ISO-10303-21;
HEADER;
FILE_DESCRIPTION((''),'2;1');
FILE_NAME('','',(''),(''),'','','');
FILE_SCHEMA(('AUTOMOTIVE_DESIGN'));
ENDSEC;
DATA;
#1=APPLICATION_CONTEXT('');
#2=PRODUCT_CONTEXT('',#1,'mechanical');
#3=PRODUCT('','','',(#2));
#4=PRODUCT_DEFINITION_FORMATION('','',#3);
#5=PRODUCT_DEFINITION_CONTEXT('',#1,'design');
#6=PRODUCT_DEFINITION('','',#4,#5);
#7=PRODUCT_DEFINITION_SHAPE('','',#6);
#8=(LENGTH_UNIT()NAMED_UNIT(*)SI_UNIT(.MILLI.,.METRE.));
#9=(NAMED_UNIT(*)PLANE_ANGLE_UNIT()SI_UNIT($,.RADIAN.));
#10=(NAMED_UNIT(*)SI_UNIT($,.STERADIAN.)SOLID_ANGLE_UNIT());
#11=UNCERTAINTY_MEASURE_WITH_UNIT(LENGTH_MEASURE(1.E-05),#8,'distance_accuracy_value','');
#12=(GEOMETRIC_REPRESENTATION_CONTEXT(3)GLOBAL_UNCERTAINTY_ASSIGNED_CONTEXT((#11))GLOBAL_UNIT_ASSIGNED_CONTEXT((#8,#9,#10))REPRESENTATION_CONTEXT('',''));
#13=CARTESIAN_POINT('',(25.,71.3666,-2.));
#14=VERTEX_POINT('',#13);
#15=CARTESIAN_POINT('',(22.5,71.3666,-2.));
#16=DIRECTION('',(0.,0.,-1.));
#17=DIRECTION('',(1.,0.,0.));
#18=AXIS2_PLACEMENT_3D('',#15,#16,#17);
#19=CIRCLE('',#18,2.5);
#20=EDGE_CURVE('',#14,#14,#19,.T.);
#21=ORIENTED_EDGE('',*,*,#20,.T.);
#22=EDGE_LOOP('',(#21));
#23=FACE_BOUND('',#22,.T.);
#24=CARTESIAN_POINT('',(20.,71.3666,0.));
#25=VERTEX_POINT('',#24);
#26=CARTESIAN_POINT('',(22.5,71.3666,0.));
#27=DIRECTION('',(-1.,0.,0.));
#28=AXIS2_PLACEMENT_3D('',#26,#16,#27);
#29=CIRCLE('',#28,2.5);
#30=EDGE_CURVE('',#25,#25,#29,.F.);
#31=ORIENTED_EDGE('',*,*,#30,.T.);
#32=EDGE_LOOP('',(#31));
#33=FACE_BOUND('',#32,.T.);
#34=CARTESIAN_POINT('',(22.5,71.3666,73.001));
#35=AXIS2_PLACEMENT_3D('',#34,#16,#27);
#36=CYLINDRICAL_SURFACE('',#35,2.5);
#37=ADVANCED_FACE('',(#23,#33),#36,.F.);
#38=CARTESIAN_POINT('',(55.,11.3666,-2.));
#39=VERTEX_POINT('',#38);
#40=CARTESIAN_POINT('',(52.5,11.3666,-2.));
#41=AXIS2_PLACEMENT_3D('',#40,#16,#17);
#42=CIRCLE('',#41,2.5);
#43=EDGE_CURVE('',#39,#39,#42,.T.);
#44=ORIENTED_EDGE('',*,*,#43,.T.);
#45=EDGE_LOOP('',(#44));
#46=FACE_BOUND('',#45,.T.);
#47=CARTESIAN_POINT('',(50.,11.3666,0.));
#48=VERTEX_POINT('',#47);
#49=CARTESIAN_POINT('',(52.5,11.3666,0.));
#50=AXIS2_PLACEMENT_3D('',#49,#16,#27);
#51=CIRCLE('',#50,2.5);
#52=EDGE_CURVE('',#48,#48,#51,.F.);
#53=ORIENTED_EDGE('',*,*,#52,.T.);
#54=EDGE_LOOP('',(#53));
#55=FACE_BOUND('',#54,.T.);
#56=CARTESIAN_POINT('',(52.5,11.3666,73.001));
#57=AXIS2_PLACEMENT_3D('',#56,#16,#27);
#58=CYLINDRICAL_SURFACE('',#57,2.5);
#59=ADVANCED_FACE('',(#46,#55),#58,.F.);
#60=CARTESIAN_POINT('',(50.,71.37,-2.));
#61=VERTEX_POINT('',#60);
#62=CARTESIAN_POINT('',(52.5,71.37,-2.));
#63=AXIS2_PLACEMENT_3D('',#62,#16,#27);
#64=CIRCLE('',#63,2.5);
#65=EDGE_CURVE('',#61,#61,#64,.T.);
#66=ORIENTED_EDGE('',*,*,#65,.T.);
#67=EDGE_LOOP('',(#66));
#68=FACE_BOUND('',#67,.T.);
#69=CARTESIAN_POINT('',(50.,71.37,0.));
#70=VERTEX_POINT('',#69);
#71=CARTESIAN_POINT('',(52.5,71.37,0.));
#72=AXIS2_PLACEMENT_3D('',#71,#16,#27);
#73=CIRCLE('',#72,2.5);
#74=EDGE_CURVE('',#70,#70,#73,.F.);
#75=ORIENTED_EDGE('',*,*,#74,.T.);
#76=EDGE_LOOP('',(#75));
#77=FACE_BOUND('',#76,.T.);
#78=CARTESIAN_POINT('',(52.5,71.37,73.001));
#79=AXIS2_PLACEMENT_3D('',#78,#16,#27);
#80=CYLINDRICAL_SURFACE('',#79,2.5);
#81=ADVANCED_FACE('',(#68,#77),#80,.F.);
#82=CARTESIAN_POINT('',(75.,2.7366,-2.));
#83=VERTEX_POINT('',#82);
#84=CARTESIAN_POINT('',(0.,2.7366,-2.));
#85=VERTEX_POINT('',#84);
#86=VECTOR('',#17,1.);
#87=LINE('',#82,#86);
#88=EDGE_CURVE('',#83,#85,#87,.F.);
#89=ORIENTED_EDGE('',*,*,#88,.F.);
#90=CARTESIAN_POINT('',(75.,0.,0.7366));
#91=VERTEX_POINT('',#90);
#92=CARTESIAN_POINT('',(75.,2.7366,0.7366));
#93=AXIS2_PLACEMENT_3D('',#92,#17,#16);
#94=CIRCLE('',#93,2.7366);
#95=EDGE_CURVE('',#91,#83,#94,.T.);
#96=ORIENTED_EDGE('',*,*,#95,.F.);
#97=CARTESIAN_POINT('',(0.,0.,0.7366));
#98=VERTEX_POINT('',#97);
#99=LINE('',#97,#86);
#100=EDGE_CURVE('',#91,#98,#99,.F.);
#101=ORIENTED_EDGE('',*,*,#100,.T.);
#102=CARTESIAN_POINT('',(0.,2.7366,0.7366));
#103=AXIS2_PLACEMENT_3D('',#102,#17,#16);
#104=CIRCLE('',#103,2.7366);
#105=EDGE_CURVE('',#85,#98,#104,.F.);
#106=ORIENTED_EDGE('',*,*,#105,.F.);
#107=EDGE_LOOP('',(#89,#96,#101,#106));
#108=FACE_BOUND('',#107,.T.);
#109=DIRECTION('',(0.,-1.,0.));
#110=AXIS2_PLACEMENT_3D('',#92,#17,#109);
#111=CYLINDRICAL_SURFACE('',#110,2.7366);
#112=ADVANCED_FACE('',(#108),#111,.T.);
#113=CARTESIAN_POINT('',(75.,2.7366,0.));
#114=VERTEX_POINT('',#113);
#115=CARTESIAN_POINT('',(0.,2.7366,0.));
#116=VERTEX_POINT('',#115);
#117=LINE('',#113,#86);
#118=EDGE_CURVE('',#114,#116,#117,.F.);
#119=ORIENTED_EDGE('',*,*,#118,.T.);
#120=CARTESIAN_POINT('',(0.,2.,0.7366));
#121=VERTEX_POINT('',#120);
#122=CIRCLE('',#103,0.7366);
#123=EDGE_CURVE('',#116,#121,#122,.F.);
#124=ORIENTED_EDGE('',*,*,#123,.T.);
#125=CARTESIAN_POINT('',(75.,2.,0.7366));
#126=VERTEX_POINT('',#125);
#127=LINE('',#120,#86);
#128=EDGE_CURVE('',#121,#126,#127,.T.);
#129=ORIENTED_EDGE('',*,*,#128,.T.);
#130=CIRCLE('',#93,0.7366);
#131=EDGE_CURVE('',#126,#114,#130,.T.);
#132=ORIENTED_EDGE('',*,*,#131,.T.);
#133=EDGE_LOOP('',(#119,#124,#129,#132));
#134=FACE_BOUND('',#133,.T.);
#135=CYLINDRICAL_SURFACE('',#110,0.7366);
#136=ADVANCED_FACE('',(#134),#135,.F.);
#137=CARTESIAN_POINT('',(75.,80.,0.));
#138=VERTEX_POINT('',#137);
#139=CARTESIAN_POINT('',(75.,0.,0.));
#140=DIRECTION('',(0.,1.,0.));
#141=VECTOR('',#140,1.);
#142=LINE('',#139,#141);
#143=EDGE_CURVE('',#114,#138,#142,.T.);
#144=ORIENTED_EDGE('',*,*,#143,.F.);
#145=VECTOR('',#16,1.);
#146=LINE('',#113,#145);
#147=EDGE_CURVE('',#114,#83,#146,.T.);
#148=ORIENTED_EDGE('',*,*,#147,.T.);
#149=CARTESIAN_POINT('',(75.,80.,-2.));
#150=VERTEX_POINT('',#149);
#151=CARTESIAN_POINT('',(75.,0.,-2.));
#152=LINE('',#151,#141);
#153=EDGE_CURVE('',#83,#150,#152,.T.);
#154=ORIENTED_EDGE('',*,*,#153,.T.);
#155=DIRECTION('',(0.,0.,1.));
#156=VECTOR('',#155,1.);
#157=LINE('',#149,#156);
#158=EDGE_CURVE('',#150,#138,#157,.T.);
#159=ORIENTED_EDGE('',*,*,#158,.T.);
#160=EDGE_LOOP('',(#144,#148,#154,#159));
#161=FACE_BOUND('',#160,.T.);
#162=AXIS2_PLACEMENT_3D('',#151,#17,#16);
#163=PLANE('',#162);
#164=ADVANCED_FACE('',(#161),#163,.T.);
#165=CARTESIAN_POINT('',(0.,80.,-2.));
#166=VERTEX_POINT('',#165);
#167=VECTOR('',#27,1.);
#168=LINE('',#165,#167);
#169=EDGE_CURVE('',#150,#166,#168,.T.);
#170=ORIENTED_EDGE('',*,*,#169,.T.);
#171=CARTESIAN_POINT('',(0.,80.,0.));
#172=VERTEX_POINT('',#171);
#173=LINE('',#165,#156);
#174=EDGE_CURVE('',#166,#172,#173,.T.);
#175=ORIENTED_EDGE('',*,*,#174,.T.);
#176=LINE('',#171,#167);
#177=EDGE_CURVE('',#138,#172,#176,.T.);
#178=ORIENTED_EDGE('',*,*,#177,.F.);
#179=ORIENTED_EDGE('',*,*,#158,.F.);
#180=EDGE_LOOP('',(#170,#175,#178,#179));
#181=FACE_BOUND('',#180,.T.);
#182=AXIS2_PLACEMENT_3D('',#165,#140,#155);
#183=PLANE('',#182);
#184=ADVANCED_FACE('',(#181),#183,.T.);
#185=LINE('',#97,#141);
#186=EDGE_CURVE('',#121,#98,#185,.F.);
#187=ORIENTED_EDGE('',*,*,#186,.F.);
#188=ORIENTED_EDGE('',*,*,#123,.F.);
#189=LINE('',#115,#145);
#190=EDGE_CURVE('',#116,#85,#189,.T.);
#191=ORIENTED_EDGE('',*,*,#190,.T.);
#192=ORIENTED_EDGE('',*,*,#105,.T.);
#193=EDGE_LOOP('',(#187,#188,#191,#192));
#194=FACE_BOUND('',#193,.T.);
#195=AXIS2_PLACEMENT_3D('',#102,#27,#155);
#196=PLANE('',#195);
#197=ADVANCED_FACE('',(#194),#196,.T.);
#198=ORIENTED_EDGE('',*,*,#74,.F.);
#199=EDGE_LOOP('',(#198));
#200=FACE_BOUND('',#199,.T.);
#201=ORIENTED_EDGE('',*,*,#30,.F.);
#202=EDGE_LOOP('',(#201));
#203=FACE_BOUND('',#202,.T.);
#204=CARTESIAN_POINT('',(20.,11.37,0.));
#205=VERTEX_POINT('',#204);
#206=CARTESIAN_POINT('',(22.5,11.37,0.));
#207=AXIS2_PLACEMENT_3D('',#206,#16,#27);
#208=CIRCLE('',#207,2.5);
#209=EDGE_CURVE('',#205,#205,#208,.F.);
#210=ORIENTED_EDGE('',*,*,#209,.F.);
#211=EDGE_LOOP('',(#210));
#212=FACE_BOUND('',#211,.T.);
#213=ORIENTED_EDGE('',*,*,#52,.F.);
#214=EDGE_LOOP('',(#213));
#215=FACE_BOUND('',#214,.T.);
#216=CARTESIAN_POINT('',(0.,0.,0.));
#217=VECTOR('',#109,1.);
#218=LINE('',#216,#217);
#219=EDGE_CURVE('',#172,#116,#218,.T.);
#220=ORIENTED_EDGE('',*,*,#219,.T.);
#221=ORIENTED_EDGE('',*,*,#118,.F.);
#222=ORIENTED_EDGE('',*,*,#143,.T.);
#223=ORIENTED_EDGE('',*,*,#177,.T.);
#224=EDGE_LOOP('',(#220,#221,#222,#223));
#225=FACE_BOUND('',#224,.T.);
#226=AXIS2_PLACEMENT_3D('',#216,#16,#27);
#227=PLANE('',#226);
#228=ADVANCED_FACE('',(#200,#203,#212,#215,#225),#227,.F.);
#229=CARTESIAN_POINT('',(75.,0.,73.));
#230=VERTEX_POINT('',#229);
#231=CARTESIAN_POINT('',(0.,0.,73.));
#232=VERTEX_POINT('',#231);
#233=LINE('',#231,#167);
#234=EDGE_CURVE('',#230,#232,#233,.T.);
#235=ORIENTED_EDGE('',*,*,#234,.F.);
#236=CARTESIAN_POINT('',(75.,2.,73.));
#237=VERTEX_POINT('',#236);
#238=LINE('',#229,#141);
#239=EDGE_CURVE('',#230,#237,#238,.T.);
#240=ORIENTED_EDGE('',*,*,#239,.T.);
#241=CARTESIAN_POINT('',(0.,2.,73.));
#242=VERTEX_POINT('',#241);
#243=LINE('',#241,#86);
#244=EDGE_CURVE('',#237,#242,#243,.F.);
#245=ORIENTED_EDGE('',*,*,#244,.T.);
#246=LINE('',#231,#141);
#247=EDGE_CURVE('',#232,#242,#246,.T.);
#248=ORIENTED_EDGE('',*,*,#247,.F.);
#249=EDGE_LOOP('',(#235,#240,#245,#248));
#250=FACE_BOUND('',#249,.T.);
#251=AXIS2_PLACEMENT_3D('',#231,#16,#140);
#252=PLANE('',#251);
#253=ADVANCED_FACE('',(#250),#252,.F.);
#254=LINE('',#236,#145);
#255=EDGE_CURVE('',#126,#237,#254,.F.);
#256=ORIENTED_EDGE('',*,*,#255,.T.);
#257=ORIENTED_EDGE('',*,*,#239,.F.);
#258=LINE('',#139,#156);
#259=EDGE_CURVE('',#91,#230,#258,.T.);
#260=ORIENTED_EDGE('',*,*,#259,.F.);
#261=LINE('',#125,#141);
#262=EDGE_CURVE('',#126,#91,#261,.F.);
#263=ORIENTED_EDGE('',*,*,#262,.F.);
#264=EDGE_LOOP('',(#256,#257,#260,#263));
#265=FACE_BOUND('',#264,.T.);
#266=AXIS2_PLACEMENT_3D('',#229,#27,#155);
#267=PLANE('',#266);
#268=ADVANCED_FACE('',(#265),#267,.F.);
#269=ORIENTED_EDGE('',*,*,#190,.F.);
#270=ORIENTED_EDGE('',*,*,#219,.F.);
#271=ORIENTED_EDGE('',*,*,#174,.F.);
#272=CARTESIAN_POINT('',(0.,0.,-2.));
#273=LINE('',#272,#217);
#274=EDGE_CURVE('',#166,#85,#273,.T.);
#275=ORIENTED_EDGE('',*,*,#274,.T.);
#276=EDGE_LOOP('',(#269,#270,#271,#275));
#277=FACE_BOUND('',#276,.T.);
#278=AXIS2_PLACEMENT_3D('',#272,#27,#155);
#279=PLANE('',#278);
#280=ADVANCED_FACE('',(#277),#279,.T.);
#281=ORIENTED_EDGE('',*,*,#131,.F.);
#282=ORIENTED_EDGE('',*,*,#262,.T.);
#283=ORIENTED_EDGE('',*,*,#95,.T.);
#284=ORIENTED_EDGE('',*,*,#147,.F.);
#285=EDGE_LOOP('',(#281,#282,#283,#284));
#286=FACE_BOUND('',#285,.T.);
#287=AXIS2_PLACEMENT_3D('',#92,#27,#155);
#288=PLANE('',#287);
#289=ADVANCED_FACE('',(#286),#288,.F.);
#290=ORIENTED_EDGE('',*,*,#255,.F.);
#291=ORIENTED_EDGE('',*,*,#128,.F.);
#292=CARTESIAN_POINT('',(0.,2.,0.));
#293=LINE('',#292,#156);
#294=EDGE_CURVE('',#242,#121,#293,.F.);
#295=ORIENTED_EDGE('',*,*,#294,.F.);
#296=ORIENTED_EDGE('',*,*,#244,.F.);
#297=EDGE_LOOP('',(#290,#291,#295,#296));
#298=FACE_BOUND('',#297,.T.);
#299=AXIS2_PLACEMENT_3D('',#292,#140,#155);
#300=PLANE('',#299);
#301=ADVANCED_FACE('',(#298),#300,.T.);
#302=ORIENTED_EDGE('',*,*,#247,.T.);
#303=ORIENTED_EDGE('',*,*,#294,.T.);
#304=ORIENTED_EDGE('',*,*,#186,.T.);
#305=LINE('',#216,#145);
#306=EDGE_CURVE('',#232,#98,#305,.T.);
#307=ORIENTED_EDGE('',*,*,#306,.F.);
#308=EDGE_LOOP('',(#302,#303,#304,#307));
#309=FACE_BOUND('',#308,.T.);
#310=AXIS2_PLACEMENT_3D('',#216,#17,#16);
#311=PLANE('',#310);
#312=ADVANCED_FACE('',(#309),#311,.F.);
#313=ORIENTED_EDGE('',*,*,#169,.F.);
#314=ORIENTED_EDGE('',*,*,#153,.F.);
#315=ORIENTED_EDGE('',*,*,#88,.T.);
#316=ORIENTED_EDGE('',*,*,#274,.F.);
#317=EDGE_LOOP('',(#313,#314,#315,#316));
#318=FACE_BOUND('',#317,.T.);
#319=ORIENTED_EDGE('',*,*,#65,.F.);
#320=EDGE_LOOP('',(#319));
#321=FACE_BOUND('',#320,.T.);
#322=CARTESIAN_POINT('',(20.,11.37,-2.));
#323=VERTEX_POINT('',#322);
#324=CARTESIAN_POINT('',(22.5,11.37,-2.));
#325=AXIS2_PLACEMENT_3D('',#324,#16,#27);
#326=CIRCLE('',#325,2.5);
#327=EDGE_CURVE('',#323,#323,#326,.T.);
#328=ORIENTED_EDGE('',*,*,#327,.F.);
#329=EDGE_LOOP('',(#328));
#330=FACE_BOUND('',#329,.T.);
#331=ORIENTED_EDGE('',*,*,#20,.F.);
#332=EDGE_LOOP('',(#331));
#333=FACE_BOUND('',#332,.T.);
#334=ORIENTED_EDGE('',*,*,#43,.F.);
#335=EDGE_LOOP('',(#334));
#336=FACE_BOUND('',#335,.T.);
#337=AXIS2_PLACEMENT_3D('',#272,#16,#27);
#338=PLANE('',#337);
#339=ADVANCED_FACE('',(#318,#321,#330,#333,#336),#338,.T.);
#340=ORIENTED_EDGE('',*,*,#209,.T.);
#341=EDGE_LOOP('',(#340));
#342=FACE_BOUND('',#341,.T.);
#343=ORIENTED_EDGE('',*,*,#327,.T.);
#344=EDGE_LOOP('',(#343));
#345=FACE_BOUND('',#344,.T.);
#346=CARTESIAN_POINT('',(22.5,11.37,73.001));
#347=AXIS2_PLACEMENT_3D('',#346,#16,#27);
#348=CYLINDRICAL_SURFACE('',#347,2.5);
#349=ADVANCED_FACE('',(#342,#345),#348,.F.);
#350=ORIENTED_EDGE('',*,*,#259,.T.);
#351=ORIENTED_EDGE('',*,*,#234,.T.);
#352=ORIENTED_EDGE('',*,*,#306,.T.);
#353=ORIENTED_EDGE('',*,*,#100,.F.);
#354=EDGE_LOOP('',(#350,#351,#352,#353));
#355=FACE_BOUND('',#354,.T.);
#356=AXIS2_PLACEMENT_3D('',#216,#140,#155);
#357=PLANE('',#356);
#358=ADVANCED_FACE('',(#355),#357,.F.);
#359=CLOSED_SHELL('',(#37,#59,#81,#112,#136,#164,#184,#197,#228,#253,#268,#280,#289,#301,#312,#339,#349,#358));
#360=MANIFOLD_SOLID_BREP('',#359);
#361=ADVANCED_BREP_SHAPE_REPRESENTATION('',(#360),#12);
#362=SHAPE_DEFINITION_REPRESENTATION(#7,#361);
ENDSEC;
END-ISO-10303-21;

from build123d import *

# Parameters (mm, degrees)
SKETCH2_W                    = 75
SKETCH2_H                    = 80
BASE_FLANGE1_DEPTH           = 2
EDGE_FLANGE1_STRIP_W         = 9.4732
EDGE_FLANGE1_STRIP_H         = 2
EDGE_FLANGE1_STRIP_CUT_DEPTH = 75
EDGE_FLANGE1_DEPTH           = 75
CUT_EXTRUDE1_REACH           = 134.853
SKETCH10_R                   = 2.5


# Sheet-metal steps are written as plain solids
with BuildPart() as part:
    # Sketch2 → Base-Flange1 (new body)
    with BuildSketch(Plane.XY):
        with Locations((37.5, 40)):
            Rectangle(SKETCH2_W, SKETCH2_H)
    extrude(amount=-BASE_FLANGE1_DEPTH)

    # Edge-Flange1 strip (across the edge) → Edge-Flange1 strip cut (cut)
    with BuildSketch(Plane.YZ):
        with Locations((-2, -1)):
            Rectangle(EDGE_FLANGE1_STRIP_W, EDGE_FLANGE1_STRIP_H)
    extrude(amount=EDGE_FLANGE1_STRIP_CUT_DEPTH, mode=Mode.SUBTRACT)

    # Edge-Flange1 section (across the edge) → Edge-Flange1 (add)
    with BuildSketch(Plane.YZ):
        with BuildLine():
            Line((0, 0.7366), (0, 73))
            Line((0, 73), (2, 73))
            Line((2, 73), (2, 0.7366))
            ThreePointArc((2, 0.7366), (2.215745145, 0.215745145), (2.7366, 0))
            Line((2.7366, 0), (2.7366, -2))
            ThreePointArc((2.7366, -2), (0.801531583, -1.198468417), (0, 0.7366))
        make_face()
    extrude(amount=EDGE_FLANGE1_DEPTH)

    # Sketch10 → Cut-Extrude1 (cut, up to next)
    with BuildSketch(Plane(origin=(0, 0, -2), x_dir=(-1, 0, 0), z_dir=(0, 0, -1)), mode=Mode.PRIVATE) as cut_extrude1_sk1:
        with Locations((-22.5, 11.37)):
            Circle(SKETCH10_R)
    cut_extrude1_tool1 = extrude(cut_extrude1_sk1.sketch, amount=-CUT_EXTRUDE1_REACH, mode=Mode.PRIVATE) & part.part
    # Sketch10 → Cut-Extrude1 (cut, up to next)
    with BuildSketch(Plane(origin=(0, 0, -2), x_dir=(-1, 0, 0), z_dir=(0, 0, -1)), mode=Mode.PRIVATE) as cut_extrude1_sk2:
        with Locations((-52.5, 71.37)):
            Circle(SKETCH10_R)
    cut_extrude1_tool2 = extrude(cut_extrude1_sk2.sketch, amount=-CUT_EXTRUDE1_REACH, mode=Mode.PRIVATE) & part.part
    # Sketch10 → Cut-Extrude1 (cut, up to next)
    with BuildSketch(Plane(origin=(0, 0, -2), x_dir=(-1, 0, 0), z_dir=(0, 0, -1)), mode=Mode.PRIVATE) as cut_extrude1_sk3:
        with Locations((-52.5, 11.3666)):
            Circle(SKETCH10_R)
    cut_extrude1_tool3 = extrude(cut_extrude1_sk3.sketch, amount=-CUT_EXTRUDE1_REACH, mode=Mode.PRIVATE) & part.part
    # Sketch10 → Cut-Extrude1 (cut, up to next)
    with BuildSketch(Plane(origin=(0, 0, -2), x_dir=(-1, 0, 0), z_dir=(0, 0, -1)), mode=Mode.PRIVATE) as cut_extrude1_sk4:
        with Locations((-22.5, 71.3666)):
            Circle(SKETCH10_R)
    cut_extrude1_tool4 = extrude(cut_extrude1_sk4.sketch, amount=-CUT_EXTRUDE1_REACH, mode=Mode.PRIVATE) & part.part
    add(cut_extrude1_tool1.solids().sort_by_distance((22.5, 11.37, -2))[0], mode=Mode.SUBTRACT)
    add(cut_extrude1_tool2.solids().sort_by_distance((52.5, 71.37, -2))[0], mode=Mode.SUBTRACT)
    add(cut_extrude1_tool3.solids().sort_by_distance((52.5, 11.3666, -2))[0], mode=Mode.SUBTRACT)
    add(cut_extrude1_tool4.solids().sort_by_distance((22.5, 71.3666, -2))[0], mode=Mode.SUBTRACT)


solid = part.part
